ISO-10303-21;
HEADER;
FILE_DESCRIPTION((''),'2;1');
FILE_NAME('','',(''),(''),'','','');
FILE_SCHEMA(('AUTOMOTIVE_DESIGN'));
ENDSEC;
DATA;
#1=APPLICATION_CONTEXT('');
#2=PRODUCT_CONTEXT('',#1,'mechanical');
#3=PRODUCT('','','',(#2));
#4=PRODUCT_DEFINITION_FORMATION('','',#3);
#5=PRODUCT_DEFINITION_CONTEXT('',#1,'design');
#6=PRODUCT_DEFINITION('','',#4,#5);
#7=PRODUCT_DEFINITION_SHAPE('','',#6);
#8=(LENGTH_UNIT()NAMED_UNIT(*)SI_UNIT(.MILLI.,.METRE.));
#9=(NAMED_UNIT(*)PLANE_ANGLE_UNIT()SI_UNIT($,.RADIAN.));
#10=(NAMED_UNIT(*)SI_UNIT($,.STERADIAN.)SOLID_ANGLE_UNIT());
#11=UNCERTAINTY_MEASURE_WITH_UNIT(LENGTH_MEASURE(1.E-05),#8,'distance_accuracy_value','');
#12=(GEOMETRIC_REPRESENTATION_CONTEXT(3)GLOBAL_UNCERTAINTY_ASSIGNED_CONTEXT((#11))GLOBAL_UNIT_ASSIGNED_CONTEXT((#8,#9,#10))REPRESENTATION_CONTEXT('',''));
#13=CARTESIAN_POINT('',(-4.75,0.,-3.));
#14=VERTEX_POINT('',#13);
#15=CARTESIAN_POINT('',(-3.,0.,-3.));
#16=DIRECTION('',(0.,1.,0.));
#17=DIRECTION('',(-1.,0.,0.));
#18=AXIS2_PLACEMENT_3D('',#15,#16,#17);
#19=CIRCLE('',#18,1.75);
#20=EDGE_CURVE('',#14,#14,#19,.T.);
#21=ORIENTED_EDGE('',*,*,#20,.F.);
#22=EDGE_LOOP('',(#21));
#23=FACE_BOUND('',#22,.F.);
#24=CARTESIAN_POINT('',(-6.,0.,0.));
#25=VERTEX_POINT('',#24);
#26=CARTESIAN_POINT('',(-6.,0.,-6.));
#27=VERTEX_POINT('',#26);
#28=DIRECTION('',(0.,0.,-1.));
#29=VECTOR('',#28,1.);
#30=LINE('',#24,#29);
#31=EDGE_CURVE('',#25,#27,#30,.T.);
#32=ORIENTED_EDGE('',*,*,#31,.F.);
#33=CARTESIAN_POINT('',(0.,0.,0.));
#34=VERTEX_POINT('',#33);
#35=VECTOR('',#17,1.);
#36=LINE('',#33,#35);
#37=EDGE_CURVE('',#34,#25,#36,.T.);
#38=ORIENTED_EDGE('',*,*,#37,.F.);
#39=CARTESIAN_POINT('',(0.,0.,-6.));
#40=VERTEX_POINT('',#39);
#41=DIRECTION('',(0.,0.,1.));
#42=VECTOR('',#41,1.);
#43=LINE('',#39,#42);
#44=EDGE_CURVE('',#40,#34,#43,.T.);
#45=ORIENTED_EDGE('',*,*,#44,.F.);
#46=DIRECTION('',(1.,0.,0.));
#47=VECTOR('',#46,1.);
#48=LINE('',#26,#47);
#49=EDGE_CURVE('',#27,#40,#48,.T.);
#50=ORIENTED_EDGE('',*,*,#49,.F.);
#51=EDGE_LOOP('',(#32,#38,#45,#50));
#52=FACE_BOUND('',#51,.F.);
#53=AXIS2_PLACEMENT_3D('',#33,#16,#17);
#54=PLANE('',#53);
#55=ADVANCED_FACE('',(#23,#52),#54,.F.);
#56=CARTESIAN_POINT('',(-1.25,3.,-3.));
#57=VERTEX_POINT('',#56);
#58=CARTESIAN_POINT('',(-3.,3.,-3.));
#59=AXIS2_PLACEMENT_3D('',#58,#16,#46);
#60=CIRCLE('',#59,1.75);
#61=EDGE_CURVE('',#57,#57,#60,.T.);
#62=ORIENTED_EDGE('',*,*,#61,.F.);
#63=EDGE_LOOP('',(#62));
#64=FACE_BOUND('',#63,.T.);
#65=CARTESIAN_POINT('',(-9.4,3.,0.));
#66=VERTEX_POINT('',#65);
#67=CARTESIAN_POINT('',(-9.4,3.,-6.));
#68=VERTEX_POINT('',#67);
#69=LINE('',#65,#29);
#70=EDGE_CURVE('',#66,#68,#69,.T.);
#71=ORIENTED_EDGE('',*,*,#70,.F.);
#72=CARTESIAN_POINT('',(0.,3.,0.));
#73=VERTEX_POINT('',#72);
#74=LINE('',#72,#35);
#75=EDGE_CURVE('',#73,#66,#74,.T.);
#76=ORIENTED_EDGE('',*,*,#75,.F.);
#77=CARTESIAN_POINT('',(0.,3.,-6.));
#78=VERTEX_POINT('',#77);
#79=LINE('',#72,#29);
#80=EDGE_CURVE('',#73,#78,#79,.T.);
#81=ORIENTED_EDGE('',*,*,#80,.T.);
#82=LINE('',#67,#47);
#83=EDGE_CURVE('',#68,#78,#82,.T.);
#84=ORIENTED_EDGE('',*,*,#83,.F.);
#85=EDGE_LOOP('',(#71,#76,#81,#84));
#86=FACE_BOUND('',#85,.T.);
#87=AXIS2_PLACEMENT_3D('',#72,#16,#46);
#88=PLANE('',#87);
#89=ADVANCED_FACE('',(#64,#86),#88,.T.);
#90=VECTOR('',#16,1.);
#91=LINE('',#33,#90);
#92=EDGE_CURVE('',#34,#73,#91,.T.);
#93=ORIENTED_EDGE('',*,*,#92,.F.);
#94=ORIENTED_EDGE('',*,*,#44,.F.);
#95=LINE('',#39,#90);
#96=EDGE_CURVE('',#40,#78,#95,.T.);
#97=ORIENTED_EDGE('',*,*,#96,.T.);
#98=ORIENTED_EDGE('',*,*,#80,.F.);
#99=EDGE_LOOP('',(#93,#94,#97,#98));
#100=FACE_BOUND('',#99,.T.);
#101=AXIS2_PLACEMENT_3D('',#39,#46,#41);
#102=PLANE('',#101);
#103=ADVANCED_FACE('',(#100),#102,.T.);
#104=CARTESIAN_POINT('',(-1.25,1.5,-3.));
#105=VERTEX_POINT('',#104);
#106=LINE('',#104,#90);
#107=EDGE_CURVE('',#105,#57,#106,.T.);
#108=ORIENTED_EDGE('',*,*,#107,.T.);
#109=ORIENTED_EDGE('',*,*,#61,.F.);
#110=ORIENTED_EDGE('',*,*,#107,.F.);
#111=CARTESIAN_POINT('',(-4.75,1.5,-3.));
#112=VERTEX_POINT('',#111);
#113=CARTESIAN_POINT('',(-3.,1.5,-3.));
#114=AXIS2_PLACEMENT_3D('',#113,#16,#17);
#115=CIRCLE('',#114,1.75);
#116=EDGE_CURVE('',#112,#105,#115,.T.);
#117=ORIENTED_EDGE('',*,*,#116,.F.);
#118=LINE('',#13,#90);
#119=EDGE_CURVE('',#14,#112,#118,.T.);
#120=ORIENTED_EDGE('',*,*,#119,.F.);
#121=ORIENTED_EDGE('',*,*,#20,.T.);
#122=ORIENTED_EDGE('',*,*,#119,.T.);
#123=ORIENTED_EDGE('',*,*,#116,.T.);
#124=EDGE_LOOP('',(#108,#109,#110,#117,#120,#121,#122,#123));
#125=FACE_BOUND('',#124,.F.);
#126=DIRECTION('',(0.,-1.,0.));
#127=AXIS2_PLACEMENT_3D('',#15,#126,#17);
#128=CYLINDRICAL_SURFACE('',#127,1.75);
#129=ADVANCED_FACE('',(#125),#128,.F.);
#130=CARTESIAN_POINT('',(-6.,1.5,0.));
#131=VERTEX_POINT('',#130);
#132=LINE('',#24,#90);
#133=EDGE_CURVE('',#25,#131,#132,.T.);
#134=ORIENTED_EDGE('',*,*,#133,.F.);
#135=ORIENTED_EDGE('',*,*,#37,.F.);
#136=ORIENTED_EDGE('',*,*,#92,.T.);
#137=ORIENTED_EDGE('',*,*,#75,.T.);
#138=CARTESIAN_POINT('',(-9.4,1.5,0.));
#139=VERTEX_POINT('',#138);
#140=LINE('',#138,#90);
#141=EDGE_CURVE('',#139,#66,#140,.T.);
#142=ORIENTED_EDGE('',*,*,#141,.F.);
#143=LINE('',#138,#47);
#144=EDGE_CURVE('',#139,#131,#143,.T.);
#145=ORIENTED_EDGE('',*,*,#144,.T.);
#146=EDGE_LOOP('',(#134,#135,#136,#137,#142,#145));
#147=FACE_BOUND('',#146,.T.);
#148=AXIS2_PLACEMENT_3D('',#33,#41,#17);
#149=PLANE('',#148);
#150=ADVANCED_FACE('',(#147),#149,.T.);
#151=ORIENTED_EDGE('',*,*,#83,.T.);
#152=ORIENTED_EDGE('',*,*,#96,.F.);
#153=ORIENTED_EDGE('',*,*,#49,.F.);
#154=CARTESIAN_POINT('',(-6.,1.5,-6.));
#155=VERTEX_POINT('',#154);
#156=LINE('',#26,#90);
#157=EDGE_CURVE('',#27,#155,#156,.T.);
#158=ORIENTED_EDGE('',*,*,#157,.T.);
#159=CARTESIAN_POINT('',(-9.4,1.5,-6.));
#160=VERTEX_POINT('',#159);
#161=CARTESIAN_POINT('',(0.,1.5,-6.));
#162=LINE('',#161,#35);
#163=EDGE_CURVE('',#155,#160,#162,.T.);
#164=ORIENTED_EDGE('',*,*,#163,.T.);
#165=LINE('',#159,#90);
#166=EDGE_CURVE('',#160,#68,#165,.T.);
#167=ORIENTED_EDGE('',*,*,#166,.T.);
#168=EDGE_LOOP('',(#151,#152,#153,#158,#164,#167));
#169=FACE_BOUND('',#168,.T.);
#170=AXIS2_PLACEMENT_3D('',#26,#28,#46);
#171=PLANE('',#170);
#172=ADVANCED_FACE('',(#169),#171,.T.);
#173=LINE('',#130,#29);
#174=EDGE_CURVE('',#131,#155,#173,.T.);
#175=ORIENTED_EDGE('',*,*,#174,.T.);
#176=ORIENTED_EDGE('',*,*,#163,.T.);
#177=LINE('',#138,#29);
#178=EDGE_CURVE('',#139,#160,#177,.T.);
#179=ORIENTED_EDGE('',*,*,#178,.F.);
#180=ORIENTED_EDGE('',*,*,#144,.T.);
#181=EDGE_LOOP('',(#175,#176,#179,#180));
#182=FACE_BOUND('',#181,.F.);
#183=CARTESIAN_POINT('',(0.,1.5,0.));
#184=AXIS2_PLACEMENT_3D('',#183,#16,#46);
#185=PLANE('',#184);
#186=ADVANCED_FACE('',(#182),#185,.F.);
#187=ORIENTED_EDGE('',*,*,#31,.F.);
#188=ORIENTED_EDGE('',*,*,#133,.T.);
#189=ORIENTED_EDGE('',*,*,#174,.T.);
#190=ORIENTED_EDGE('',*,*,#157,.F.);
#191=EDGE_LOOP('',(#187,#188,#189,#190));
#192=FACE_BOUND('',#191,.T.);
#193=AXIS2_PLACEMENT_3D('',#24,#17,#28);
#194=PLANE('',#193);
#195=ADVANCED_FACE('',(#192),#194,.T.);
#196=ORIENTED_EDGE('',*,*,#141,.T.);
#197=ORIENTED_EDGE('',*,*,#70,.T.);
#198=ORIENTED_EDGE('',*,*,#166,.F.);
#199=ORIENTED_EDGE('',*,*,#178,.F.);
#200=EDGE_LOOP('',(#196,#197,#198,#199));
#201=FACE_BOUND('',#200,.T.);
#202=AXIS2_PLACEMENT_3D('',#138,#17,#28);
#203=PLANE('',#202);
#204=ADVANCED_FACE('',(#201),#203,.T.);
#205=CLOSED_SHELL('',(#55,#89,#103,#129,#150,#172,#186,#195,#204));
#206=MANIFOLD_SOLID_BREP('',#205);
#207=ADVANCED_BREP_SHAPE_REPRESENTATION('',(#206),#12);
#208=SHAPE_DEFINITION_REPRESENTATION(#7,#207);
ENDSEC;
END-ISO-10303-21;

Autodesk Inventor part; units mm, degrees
ref_plane "YZ Plane" through (0, 0, 0) normal (1, 0, 0) x (0, 1, 0)
ref_plane "XZ Plane" through (0, 0, 0) normal (0, 1, 0) x (-1, 0, 0)
ref_plane "XY Plane" through (0, 0, 0) normal (0, 0, 1) x (1, 0, 0)
sketch "Sketch1" plane through (0, 0, 0) normal (0, 1, 0) x (-1, 0, 0)
  line L0 (0, 0) -> (6, 0)
  line L1 (6, 0) -> (6, -6)
  line L2 (6, -6) -> (0, -6)
  line L3 (0, -6) -> (0, 0)
  circle A0 centre (3, -3) radius 1.75
  dimension "d0" = 6
  dimension "d1" = 6
  dimension "d2" = 3.5
extrude "Extrusion1" add sketch "Sketch1" along normal blind 1.5
sketch "Sketch2" plane through (0, 1.5, 0) normal (0, 1, 0) x (1, 0, 0)
  line L0 (0, 6) -> (-6, 6) projected
  line L1 (-6, 6) -> (-6, 0) projected
  line L2 (-6, 0) -> (0, 0) projected
  line L3 (0, 0) -> (0, 6) projected
  circle A0 centre (-3, 3) radius 1.75 projected
  line L4 (-6, 0) -> (-9.4, 0)
  line L5 (-9.4, 0) -> (-9.4, 6)
  line L6 (-9.4, 6) -> (-6, 6)
  line L7 (-6, 6) -> (-6, 0)
  dimension "d5" = 3.4
extrude "Extrusion2" add sketch "Sketch2" along normal blind 1.5
properties part number "12Vnub"
